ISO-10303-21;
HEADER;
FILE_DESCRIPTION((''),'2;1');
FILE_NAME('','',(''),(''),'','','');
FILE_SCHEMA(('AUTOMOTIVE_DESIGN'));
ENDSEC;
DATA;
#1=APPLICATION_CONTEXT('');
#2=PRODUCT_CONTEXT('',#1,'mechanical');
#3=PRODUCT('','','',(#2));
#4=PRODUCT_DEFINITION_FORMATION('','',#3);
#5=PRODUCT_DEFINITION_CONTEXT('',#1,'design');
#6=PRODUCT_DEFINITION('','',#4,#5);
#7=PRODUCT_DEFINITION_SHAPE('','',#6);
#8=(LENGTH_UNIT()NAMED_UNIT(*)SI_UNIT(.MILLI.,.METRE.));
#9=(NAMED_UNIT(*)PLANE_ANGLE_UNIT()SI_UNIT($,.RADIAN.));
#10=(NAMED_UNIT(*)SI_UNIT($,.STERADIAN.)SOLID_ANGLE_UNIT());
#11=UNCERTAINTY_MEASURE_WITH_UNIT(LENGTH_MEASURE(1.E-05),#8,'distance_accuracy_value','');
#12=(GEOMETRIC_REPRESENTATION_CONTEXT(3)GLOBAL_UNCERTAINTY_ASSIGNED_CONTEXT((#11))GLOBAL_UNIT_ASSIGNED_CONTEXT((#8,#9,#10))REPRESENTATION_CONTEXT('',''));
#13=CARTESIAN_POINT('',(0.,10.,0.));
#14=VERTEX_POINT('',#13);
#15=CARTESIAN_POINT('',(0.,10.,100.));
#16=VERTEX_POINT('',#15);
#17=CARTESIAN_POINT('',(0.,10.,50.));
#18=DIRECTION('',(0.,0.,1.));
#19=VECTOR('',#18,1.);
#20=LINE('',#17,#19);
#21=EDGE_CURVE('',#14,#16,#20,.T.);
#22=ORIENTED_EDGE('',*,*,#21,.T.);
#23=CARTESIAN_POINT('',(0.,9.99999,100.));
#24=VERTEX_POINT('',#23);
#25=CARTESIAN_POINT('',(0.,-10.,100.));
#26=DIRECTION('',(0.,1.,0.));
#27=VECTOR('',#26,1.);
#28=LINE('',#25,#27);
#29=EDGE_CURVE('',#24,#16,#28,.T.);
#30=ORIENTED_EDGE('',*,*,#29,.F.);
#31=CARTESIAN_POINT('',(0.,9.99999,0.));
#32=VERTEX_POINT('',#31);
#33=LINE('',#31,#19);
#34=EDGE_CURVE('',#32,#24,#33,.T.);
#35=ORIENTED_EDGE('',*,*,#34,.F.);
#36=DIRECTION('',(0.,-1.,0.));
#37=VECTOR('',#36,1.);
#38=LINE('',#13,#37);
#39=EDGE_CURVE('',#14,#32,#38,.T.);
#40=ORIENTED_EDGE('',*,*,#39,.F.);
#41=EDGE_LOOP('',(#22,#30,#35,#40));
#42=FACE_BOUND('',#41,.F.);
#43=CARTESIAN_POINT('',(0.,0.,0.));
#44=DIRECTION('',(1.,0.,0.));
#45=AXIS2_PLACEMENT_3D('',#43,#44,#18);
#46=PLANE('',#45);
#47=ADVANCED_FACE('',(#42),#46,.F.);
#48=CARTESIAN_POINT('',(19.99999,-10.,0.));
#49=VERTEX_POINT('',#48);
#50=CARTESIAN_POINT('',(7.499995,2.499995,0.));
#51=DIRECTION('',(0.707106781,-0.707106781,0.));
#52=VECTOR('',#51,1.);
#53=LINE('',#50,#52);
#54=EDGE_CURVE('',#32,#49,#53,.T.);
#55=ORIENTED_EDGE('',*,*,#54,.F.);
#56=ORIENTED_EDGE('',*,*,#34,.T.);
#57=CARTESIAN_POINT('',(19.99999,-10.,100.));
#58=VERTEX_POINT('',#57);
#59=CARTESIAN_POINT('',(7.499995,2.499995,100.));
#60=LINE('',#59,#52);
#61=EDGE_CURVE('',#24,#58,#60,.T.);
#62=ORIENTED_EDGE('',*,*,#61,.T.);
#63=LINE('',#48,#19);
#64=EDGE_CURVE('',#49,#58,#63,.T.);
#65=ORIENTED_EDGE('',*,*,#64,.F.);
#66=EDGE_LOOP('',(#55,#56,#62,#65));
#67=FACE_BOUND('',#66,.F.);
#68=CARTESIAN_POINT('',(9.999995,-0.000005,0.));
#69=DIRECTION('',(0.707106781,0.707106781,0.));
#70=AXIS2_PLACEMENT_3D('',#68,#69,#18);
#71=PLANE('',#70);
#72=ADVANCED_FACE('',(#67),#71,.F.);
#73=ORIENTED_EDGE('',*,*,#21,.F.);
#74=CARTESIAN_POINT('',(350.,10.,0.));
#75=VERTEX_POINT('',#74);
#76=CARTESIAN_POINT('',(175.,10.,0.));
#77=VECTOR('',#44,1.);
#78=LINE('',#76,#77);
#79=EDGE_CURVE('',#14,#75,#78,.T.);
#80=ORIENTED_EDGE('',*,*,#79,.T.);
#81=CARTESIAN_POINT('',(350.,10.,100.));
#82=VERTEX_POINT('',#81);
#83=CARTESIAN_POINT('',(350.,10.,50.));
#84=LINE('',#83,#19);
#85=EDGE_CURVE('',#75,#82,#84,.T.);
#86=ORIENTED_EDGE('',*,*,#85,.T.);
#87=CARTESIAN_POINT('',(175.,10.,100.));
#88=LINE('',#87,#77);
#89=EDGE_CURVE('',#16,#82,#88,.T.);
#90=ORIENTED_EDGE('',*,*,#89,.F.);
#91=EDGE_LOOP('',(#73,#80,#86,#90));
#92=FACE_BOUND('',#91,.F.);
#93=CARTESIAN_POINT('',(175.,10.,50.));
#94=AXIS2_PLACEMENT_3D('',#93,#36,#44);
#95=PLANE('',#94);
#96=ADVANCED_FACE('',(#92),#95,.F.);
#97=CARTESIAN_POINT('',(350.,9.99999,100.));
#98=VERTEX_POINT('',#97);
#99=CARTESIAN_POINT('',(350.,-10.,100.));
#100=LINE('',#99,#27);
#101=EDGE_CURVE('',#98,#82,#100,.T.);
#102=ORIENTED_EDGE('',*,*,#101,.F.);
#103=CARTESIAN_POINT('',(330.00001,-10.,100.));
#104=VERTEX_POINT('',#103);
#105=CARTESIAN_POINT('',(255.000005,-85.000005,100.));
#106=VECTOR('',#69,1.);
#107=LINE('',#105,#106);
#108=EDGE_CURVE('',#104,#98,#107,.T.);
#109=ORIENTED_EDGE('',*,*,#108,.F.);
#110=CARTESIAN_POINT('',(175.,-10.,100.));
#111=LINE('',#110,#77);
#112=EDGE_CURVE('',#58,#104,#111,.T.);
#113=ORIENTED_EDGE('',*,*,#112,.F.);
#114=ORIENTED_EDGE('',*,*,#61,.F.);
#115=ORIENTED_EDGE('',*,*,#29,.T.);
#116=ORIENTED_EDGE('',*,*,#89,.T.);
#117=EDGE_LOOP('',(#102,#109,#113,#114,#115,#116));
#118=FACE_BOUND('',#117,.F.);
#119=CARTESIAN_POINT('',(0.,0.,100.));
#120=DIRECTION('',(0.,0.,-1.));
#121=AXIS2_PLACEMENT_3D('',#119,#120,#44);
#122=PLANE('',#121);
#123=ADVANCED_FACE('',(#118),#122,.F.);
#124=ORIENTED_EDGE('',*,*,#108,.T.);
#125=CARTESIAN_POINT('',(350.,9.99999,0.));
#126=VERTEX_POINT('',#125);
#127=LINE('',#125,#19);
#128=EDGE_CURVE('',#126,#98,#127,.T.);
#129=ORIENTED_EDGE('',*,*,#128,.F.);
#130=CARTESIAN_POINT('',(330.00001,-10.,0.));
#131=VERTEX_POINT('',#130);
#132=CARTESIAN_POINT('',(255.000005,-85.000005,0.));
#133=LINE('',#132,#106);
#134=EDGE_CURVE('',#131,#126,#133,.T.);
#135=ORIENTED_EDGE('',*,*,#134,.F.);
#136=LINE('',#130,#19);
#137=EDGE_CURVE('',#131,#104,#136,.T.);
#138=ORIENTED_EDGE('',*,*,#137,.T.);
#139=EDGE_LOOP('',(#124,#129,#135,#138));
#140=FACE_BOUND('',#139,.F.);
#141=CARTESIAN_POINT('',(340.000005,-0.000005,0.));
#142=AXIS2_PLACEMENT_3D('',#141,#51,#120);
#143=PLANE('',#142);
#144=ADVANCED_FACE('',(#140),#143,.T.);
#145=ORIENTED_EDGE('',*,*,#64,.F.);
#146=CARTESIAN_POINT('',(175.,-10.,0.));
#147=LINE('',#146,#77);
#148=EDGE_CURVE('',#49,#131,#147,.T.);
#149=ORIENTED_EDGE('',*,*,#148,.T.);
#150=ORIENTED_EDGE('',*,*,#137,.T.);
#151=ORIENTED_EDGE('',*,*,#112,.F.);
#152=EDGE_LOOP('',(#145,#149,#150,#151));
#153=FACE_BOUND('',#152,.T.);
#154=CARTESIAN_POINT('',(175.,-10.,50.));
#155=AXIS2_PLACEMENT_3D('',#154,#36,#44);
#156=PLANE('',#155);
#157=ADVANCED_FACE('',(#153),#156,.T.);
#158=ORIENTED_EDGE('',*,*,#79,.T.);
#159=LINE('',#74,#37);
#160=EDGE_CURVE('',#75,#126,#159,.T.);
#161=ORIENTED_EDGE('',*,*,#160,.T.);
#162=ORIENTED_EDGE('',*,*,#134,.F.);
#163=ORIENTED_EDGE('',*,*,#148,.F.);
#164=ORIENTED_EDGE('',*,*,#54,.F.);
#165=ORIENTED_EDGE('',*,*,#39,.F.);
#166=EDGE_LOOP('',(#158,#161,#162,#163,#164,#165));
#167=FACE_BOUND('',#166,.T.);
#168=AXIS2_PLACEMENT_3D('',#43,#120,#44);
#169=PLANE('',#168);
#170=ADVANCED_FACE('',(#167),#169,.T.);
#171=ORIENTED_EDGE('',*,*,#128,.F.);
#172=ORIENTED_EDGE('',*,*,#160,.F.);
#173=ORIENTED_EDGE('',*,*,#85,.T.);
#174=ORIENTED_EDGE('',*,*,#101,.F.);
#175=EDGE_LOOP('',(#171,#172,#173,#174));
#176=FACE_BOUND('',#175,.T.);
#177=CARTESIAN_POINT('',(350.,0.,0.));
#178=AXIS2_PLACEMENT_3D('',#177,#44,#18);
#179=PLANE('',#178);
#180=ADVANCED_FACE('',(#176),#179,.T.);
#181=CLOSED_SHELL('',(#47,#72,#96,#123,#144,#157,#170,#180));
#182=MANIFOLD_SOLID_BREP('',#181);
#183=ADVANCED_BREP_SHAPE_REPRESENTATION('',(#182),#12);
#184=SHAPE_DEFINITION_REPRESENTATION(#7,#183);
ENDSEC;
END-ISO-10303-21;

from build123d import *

# Parameters (mm, degrees)
F0_W     = 350
F0_H     = 100
F1_DEPTH = 10
F2_SIZE2 = 19.99999
F2_SIZE  = 19.99999
F3_SIZE2 = 19.99999
F3_SIZE  = 19.99999


# Not quite as in the source:
# - a fillet or chamfer is up to 0.001 mm smaller than in the source, because OpenCascade refuses the exact size


with BuildPart() as f1:
    # F0 (on Front) → F1 (new body, symmetric)
    with BuildSketch(Plane.XZ):
        with Locations((175, 50)):
            Rectangle(F0_W, F0_H)
    extrude(amount=F1_DEPTH, both=True)

    # F2 (size 20 and 20 in the source; OpenCascade refuses exactly that, so slightly less here)
    f2_edges = [f1.edges().sort_by_distance(p)[0] for p in [
        (0, -10, 50),
    ]]
    chamfer(f2_edges, length=F2_SIZE, length2=F2_SIZE2)

    # F3 (size 20 and 20 in the source; OpenCascade refuses exactly that, so slightly less here)
    f3_edges = [f1.edges().sort_by_distance(p)[0] for p in [
        (350, -10, 50),
    ]]
    chamfer(f3_edges, length=F3_SIZE, length2=F3_SIZE2)


solid = f1.part
